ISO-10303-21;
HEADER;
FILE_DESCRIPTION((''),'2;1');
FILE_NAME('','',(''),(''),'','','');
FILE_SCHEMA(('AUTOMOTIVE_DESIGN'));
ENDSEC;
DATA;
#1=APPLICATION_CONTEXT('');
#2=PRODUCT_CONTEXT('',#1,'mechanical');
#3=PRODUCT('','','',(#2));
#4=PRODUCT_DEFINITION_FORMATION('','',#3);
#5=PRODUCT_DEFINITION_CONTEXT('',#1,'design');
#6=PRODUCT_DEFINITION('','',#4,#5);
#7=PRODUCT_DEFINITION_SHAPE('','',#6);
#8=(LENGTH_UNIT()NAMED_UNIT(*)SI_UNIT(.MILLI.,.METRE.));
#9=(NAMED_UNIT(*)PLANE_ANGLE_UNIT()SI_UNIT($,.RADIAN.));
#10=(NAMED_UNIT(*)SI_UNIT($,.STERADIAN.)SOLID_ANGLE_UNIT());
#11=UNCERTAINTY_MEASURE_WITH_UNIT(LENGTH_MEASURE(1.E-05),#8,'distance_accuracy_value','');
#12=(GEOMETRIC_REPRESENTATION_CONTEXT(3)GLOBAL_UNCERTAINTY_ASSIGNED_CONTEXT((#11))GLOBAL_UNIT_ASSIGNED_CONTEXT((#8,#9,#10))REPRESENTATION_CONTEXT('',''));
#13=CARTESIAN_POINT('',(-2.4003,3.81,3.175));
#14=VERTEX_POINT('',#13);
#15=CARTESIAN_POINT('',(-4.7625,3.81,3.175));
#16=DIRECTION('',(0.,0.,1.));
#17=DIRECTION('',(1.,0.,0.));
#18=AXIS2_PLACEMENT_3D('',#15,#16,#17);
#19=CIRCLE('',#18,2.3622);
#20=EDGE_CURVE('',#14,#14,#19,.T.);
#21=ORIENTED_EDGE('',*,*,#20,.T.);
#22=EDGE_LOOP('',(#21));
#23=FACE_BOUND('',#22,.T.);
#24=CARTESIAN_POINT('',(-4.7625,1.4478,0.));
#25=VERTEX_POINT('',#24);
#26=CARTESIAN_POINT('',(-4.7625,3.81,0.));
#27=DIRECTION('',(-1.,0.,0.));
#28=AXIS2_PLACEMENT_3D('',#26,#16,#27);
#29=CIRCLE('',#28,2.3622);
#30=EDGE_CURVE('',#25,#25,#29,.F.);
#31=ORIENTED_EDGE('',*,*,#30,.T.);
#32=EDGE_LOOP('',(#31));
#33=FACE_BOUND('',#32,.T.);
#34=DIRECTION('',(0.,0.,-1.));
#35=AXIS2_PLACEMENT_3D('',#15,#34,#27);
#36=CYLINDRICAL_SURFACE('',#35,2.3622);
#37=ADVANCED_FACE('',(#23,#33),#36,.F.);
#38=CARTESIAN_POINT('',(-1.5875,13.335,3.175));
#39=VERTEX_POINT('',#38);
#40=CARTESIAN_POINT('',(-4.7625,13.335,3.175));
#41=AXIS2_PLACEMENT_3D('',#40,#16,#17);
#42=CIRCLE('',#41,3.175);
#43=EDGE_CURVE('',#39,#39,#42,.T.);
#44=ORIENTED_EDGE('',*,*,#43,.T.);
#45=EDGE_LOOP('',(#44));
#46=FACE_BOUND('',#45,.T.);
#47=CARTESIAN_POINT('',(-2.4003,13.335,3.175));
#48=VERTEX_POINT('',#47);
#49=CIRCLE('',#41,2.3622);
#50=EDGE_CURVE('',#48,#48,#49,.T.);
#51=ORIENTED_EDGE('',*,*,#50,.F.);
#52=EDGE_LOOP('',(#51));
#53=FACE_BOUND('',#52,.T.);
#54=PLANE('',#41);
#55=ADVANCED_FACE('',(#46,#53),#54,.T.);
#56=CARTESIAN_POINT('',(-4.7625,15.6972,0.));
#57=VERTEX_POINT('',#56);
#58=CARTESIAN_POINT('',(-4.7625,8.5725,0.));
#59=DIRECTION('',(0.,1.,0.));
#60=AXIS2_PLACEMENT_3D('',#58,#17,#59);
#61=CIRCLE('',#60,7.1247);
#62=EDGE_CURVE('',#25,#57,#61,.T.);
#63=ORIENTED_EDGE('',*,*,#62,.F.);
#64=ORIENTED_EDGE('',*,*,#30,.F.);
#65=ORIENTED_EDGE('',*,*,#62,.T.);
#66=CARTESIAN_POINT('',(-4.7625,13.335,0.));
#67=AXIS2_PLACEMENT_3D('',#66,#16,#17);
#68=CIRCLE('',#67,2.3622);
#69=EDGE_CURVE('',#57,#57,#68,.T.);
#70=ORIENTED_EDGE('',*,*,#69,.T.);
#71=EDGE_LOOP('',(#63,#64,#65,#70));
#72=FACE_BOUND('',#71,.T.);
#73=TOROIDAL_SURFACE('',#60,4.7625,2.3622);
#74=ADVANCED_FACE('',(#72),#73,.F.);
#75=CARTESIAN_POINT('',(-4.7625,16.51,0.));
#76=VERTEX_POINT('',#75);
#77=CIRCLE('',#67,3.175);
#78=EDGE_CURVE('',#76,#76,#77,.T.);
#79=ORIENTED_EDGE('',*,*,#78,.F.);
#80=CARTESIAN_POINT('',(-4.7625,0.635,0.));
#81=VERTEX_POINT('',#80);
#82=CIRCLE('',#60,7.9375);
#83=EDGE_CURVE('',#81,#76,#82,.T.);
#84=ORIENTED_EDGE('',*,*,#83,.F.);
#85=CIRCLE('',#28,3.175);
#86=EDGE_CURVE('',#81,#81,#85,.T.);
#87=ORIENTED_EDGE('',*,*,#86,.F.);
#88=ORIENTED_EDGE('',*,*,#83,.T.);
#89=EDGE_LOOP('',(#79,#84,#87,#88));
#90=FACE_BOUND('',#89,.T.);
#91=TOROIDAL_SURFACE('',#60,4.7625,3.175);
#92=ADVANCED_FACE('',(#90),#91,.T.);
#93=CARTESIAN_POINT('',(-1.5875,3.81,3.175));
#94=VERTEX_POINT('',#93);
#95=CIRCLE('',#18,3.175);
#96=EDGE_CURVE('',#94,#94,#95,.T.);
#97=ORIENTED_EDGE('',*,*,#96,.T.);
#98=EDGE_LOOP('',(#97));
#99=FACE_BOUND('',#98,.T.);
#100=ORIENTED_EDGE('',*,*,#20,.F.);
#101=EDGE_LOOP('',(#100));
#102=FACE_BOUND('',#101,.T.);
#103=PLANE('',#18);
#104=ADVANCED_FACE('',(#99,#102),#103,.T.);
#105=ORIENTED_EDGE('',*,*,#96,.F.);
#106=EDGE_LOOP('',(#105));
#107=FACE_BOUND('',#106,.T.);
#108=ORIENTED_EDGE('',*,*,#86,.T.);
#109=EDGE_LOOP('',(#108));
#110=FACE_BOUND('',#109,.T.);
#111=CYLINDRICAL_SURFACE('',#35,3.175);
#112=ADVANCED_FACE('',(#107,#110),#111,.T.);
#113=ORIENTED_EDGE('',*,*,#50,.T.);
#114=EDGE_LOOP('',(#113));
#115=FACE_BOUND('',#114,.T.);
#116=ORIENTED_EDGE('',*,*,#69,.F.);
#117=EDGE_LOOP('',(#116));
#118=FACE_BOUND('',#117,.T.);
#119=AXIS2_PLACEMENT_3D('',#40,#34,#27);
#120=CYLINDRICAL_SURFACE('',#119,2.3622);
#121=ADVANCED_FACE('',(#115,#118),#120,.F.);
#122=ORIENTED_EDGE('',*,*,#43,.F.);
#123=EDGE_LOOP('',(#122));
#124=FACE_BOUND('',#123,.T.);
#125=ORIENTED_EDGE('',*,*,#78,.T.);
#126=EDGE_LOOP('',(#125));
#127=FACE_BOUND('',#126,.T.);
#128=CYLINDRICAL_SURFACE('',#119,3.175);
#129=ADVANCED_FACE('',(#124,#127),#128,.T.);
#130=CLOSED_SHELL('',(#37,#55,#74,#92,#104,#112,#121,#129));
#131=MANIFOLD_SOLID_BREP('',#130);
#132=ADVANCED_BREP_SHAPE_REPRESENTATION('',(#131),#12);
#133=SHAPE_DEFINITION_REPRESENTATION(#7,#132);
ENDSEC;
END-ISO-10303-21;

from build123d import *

# Parameters (mm, degrees)
SKETCH1_R             = 3.175
SKETCH1_R_2           = 2.3622
BOSS_EXTRUDE1_DEPTH   = 3.175
BOSS_EXTRUDE1_2_DEPTH = 3.175
SKETCH2_R             = 3.175
SKETCH2_R_2           = 2.3622
REVOLVE1_ANGLE        = 180


with BuildPart() as part:
    # Sketch1 → Boss-Extrude1 (new body)
    with BuildSketch(Plane.XY):
        with Locations((-4.7625, 13.335)):
            Circle(SKETCH1_R)
        with Locations((-4.7625, 13.335)):
            Circle(SKETCH1_R_2, mode=Mode.SUBTRACT)
    extrude(amount=BOSS_EXTRUDE1_DEPTH)



with BuildPart() as body_2:
    # Sketch1 → Boss-Extrude1 2 (new body)
    with BuildSketch(Plane.XY):
        with Locations((-4.7625, 3.81)):
            Circle(SKETCH1_R)
        with Locations((-4.7625, 3.81)):
            Circle(SKETCH1_R_2, mode=Mode.SUBTRACT)
    extrude(amount=BOSS_EXTRUDE1_2_DEPTH)


with BuildPart() as part_1:
    add(part.part)

    add(body_2.part)  # Revolve1 merges body 2
    # Sketch2 → Revolve1 (revolve)
    with BuildSketch(Plane(origin=(0, 0, 0), x_dir=(-1, 0, 0), z_dir=(0, 0, -1))):
        with Locations((4.7625, 13.335)):
            Circle(SKETCH2_R)
        with Locations((4.7625, 13.335)):
            Circle(SKETCH2_R_2, mode=Mode.SUBTRACT)
    revolve(axis=Axis((-4.888279011, 8.5725, 0), (-1, 0, 0)), revolution_arc=REVOLVE1_ANGLE)


solid = part_1.part
